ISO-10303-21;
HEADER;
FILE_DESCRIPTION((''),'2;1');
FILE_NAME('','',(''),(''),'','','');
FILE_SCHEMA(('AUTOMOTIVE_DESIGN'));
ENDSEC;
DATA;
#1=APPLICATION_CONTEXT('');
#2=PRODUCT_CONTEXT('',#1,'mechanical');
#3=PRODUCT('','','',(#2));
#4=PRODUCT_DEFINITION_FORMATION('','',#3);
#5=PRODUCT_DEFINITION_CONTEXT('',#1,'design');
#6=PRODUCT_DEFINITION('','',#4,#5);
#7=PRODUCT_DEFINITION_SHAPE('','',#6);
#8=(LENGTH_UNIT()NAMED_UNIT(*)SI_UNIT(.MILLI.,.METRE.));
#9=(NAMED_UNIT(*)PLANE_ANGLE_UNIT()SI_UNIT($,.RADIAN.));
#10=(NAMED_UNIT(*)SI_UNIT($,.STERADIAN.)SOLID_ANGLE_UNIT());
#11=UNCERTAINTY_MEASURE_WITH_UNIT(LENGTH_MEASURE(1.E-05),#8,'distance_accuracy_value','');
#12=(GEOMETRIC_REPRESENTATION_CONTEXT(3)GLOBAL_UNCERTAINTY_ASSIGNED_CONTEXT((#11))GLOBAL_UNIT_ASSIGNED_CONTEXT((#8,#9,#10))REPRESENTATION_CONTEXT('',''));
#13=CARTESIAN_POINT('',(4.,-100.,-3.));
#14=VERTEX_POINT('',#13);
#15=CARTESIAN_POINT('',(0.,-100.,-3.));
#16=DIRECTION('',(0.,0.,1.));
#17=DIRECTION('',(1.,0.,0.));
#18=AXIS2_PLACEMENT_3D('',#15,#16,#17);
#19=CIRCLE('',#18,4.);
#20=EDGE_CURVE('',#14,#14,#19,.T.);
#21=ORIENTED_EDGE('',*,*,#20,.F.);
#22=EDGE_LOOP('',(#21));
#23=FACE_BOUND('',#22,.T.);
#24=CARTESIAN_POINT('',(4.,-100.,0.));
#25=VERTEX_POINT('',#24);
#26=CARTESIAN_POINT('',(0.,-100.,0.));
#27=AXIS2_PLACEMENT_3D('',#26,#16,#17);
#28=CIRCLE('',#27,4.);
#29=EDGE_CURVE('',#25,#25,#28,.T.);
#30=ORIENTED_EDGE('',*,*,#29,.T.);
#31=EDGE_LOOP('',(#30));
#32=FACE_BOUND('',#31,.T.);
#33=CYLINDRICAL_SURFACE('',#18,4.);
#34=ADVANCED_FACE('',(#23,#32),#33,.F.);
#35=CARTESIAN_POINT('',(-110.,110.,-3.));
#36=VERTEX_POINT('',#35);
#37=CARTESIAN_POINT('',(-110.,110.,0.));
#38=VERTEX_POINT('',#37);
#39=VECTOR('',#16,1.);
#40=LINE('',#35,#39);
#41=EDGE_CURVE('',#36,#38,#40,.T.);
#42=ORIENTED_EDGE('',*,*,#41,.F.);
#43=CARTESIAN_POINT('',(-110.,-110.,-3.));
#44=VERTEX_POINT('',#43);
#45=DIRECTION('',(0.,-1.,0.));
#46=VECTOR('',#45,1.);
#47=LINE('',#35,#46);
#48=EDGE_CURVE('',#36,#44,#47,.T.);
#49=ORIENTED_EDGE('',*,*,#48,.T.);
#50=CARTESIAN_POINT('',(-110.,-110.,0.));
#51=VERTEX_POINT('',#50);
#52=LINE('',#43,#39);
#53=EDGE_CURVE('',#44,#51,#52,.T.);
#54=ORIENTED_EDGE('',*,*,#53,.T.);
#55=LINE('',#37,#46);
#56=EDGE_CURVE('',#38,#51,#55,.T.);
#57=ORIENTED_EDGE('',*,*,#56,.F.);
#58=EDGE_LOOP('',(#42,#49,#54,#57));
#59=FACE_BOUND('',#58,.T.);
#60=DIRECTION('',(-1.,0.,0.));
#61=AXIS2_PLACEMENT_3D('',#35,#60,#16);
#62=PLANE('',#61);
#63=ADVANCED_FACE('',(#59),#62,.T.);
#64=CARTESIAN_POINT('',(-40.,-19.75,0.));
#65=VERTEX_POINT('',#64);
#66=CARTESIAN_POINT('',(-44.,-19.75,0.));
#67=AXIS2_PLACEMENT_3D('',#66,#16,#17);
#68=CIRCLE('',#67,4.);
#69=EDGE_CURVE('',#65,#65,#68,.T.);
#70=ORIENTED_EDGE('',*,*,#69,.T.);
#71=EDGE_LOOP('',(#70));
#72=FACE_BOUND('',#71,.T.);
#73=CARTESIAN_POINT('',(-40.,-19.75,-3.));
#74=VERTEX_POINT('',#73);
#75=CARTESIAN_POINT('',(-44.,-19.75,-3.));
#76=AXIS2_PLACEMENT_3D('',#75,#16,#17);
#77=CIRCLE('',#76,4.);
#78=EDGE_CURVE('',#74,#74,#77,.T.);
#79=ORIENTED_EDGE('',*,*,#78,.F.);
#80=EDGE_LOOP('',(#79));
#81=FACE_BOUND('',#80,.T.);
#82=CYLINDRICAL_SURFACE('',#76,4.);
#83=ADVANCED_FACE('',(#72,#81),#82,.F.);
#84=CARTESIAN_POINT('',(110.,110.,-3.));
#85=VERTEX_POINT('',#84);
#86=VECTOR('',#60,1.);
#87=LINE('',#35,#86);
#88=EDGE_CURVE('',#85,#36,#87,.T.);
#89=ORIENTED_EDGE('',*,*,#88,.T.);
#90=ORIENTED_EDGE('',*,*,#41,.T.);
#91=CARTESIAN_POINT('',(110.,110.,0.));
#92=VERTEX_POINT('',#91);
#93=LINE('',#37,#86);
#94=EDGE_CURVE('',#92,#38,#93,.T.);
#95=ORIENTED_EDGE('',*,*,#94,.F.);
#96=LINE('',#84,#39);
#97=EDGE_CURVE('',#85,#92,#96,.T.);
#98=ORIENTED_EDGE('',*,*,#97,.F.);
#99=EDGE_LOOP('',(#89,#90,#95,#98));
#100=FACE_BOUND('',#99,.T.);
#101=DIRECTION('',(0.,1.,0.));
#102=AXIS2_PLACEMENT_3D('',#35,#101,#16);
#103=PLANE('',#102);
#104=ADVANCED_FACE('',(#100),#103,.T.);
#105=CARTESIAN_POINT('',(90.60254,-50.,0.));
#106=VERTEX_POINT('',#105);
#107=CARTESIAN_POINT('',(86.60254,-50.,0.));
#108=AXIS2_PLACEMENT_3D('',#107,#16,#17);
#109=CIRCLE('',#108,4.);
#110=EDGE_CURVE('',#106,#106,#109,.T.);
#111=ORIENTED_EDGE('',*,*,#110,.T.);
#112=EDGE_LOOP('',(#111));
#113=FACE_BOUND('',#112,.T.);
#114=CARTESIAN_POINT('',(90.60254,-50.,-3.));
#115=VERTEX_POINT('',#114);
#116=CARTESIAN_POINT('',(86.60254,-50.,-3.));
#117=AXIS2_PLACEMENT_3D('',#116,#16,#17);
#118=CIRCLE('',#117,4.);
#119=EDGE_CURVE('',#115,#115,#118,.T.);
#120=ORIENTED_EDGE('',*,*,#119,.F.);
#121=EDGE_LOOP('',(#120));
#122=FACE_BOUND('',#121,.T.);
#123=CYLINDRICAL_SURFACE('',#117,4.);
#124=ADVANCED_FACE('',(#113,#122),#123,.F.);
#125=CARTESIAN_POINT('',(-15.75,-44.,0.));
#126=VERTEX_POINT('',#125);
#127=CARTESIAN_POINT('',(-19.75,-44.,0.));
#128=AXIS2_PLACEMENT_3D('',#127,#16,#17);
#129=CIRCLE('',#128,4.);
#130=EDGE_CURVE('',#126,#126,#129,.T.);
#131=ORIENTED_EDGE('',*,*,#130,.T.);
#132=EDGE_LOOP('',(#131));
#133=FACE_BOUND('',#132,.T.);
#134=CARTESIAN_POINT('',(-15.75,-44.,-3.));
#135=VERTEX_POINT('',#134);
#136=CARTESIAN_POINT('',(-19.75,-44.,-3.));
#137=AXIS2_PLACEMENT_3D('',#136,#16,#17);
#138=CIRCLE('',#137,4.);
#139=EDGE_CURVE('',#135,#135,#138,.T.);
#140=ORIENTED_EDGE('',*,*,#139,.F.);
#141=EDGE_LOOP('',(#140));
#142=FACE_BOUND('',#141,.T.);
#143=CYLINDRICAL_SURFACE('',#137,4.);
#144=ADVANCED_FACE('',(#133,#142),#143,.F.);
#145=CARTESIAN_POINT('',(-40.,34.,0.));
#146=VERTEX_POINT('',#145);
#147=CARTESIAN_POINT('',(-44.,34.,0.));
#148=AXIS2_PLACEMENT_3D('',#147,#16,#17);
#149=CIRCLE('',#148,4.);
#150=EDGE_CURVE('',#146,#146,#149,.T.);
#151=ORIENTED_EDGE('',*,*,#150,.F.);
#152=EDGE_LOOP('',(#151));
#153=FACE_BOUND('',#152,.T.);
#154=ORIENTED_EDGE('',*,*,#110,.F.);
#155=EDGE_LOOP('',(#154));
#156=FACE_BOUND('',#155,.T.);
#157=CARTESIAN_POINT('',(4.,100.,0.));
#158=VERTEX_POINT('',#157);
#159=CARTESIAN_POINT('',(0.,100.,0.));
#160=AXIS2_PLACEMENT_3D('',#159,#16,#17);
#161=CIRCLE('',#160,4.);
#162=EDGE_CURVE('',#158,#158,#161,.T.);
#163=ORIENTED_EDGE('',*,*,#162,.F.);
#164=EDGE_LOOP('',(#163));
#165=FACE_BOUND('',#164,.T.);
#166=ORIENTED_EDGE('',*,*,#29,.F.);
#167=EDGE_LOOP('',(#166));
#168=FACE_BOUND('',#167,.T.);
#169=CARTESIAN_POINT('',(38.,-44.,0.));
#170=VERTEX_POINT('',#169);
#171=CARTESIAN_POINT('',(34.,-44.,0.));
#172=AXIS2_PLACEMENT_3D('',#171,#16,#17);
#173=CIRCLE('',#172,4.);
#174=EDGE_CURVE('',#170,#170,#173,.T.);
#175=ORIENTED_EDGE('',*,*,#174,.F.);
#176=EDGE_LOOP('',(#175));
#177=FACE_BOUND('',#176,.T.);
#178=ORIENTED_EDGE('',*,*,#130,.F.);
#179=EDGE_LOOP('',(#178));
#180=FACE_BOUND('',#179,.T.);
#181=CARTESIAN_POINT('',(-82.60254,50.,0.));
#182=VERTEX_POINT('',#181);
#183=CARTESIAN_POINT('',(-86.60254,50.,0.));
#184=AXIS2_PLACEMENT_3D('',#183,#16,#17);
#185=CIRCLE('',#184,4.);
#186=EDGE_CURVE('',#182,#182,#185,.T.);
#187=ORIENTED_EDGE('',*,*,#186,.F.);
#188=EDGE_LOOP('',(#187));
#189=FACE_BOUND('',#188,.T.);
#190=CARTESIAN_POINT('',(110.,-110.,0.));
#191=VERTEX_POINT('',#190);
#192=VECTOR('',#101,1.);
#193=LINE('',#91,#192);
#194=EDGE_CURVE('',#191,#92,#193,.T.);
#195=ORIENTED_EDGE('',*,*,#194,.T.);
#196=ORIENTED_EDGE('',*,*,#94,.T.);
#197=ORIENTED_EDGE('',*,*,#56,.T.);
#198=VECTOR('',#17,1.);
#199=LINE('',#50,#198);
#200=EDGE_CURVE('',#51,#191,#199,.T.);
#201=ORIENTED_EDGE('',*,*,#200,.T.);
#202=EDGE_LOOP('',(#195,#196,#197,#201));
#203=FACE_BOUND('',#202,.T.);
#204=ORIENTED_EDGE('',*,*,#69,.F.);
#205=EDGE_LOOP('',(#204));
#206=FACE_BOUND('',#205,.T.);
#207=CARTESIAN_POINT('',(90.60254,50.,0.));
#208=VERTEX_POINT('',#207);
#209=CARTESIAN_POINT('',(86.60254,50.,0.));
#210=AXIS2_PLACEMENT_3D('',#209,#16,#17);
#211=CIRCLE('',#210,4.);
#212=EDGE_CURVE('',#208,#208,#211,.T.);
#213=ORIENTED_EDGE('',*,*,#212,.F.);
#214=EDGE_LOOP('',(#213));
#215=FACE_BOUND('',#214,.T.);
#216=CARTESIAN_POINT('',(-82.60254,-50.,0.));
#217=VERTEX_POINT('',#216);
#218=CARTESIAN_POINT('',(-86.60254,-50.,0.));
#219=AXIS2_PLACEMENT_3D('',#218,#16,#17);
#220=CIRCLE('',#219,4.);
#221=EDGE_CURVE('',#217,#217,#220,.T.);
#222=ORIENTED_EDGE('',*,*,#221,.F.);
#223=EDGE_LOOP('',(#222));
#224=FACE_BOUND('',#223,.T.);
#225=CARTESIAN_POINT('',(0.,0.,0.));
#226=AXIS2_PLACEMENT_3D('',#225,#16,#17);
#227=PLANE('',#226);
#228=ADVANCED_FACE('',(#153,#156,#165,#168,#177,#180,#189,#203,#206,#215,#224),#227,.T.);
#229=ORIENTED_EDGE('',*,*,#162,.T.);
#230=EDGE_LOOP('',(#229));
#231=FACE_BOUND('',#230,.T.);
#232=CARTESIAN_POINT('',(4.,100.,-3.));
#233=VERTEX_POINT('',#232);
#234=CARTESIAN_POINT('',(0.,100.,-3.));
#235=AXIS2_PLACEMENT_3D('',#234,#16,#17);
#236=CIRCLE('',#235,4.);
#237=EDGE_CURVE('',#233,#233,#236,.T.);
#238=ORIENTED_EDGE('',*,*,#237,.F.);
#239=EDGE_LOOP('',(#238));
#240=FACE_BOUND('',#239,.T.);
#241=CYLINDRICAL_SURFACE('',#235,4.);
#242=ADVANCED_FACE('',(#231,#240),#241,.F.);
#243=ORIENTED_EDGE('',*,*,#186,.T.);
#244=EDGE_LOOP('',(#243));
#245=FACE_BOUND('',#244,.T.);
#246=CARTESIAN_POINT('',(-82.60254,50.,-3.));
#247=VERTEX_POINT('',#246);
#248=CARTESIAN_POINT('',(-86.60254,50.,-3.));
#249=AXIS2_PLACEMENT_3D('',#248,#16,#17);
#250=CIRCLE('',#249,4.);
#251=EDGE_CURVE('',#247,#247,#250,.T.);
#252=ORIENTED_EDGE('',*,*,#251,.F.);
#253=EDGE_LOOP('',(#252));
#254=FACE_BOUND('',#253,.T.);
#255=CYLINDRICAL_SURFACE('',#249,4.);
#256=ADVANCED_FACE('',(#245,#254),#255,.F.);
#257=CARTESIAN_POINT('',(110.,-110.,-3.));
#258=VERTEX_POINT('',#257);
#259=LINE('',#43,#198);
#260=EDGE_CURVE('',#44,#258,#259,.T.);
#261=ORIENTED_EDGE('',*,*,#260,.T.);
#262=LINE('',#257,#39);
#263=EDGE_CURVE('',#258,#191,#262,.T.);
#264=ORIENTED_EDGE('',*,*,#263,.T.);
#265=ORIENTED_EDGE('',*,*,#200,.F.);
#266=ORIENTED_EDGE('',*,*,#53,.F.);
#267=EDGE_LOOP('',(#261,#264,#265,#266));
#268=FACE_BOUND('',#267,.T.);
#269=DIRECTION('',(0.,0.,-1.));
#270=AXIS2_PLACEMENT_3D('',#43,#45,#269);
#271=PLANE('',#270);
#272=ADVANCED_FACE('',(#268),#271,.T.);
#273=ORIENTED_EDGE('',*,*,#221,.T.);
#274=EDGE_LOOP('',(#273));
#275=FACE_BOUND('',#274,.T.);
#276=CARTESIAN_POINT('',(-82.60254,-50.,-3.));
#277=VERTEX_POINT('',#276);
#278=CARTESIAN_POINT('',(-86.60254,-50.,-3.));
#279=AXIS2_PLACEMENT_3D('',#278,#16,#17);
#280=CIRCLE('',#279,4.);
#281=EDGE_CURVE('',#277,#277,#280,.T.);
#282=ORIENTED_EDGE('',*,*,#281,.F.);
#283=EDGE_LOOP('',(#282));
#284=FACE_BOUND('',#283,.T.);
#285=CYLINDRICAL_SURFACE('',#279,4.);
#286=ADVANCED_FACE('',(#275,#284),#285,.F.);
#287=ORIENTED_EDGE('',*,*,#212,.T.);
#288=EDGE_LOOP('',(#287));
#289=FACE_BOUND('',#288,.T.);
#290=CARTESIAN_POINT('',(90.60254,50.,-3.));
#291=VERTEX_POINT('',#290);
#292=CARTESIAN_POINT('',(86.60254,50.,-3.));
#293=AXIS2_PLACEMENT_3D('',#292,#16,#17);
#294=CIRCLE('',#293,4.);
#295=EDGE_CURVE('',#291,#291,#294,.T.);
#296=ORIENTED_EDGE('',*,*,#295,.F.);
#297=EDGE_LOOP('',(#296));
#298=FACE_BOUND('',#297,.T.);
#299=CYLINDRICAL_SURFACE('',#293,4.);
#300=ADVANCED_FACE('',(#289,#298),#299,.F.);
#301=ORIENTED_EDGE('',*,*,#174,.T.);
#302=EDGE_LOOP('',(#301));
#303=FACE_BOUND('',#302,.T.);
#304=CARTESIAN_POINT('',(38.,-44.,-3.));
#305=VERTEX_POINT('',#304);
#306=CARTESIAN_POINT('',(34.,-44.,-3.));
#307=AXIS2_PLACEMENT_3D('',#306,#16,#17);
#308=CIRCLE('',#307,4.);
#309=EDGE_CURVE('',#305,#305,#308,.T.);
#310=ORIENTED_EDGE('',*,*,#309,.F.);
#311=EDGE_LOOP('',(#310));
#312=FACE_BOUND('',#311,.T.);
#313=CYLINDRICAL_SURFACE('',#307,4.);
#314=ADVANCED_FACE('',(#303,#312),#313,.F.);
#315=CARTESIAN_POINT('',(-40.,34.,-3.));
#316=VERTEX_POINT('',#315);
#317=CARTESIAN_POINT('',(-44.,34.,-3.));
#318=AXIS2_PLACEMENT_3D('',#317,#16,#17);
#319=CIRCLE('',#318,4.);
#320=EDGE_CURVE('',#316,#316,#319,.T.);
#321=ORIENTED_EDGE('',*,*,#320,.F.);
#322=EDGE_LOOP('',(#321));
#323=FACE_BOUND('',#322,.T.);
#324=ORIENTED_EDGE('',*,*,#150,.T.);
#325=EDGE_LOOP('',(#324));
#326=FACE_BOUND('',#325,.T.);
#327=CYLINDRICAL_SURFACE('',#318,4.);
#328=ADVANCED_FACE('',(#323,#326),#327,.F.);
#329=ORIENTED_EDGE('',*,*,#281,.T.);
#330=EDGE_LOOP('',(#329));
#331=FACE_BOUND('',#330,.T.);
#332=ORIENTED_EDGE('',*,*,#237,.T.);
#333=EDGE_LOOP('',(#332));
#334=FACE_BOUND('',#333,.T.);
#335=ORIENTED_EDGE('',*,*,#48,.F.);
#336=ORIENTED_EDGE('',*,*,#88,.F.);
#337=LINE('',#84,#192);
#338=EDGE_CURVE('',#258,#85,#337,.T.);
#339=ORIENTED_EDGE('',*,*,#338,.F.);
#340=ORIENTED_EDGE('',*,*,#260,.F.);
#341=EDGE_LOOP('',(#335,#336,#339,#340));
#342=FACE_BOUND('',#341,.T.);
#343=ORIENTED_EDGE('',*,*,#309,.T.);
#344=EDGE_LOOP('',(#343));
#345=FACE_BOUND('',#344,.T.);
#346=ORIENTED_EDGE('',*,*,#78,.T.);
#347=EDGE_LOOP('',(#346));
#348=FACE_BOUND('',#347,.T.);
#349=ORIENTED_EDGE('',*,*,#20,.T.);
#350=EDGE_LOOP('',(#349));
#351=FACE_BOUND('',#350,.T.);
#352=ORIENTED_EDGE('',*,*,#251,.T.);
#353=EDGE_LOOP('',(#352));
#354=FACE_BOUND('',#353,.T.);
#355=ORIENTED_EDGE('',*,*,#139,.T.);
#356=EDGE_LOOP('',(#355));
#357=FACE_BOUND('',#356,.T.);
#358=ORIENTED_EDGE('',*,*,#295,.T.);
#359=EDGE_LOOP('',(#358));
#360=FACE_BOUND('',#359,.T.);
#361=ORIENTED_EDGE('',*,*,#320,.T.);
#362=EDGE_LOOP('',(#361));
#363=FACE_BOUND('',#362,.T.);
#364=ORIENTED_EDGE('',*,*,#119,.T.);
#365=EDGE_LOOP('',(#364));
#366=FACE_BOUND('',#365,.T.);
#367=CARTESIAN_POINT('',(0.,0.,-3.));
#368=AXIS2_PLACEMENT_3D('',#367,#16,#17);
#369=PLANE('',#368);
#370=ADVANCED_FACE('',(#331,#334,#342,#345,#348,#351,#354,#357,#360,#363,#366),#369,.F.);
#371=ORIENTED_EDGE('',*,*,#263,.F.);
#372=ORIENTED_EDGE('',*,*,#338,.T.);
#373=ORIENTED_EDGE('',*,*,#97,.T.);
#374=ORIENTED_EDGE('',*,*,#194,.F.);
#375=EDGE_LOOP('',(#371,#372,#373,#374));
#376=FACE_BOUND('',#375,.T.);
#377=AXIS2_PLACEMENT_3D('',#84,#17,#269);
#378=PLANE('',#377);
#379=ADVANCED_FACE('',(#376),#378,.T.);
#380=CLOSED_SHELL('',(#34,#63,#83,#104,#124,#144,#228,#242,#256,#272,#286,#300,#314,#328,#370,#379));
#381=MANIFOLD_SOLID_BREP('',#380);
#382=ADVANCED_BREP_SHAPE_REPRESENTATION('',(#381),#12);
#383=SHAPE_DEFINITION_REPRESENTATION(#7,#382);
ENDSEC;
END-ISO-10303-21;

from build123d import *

# Parameters (mm, degrees)
SCHIZZO1_W               = 220
SCHIZZO1_H               = 220
SCHIZZO1_R               = 4
BASE_FLANGIA1_DEPTH      = 3
SCHIZZO2_R               = 4
TAGLIO_ESTRUSIONE1_DEPTH = 156.592416268


# Sheet-metal steps are written as plain solids
with BuildPart() as part:
    # Schizzo1 → Base-Flangia1 (new body)
    with BuildSketch(Plane.XY):
        Rectangle(SCHIZZO1_W, SCHIZZO1_H)
        with Locations((0, 100)):
            Circle(SCHIZZO1_R, mode=Mode.SUBTRACT)
        with Locations((86.602540378, 50)):
            Circle(SCHIZZO1_R, mode=Mode.SUBTRACT)
        with Locations((86.602540378, -50)):
            Circle(SCHIZZO1_R, mode=Mode.SUBTRACT)
        with Locations((0, -100)):
            Circle(SCHIZZO1_R, mode=Mode.SUBTRACT)
        with Locations((-86.602540378, -50)):
            Circle(SCHIZZO1_R, mode=Mode.SUBTRACT)
        with Locations((-86.602540378, 50)):
            Circle(SCHIZZO1_R, mode=Mode.SUBTRACT)
    extrude(amount=-BASE_FLANGIA1_DEPTH)

    # Schizzo2 → Taglio-Estrusione1 (cut, through all)
    with BuildSketch(Plane.XY):
        with Locations((-19.75, -44)):
            Circle(SCHIZZO2_R)
        with Locations((-44, -19.75)):
            Circle(SCHIZZO2_R)
        with Locations((-44, 34)):
            Circle(SCHIZZO2_R)
        with Locations((34, -44)):
            Circle(SCHIZZO2_R)
    extrude(amount=-TAGLIO_ESTRUSIONE1_DEPTH, mode=Mode.SUBTRACT)


solid = part.part
